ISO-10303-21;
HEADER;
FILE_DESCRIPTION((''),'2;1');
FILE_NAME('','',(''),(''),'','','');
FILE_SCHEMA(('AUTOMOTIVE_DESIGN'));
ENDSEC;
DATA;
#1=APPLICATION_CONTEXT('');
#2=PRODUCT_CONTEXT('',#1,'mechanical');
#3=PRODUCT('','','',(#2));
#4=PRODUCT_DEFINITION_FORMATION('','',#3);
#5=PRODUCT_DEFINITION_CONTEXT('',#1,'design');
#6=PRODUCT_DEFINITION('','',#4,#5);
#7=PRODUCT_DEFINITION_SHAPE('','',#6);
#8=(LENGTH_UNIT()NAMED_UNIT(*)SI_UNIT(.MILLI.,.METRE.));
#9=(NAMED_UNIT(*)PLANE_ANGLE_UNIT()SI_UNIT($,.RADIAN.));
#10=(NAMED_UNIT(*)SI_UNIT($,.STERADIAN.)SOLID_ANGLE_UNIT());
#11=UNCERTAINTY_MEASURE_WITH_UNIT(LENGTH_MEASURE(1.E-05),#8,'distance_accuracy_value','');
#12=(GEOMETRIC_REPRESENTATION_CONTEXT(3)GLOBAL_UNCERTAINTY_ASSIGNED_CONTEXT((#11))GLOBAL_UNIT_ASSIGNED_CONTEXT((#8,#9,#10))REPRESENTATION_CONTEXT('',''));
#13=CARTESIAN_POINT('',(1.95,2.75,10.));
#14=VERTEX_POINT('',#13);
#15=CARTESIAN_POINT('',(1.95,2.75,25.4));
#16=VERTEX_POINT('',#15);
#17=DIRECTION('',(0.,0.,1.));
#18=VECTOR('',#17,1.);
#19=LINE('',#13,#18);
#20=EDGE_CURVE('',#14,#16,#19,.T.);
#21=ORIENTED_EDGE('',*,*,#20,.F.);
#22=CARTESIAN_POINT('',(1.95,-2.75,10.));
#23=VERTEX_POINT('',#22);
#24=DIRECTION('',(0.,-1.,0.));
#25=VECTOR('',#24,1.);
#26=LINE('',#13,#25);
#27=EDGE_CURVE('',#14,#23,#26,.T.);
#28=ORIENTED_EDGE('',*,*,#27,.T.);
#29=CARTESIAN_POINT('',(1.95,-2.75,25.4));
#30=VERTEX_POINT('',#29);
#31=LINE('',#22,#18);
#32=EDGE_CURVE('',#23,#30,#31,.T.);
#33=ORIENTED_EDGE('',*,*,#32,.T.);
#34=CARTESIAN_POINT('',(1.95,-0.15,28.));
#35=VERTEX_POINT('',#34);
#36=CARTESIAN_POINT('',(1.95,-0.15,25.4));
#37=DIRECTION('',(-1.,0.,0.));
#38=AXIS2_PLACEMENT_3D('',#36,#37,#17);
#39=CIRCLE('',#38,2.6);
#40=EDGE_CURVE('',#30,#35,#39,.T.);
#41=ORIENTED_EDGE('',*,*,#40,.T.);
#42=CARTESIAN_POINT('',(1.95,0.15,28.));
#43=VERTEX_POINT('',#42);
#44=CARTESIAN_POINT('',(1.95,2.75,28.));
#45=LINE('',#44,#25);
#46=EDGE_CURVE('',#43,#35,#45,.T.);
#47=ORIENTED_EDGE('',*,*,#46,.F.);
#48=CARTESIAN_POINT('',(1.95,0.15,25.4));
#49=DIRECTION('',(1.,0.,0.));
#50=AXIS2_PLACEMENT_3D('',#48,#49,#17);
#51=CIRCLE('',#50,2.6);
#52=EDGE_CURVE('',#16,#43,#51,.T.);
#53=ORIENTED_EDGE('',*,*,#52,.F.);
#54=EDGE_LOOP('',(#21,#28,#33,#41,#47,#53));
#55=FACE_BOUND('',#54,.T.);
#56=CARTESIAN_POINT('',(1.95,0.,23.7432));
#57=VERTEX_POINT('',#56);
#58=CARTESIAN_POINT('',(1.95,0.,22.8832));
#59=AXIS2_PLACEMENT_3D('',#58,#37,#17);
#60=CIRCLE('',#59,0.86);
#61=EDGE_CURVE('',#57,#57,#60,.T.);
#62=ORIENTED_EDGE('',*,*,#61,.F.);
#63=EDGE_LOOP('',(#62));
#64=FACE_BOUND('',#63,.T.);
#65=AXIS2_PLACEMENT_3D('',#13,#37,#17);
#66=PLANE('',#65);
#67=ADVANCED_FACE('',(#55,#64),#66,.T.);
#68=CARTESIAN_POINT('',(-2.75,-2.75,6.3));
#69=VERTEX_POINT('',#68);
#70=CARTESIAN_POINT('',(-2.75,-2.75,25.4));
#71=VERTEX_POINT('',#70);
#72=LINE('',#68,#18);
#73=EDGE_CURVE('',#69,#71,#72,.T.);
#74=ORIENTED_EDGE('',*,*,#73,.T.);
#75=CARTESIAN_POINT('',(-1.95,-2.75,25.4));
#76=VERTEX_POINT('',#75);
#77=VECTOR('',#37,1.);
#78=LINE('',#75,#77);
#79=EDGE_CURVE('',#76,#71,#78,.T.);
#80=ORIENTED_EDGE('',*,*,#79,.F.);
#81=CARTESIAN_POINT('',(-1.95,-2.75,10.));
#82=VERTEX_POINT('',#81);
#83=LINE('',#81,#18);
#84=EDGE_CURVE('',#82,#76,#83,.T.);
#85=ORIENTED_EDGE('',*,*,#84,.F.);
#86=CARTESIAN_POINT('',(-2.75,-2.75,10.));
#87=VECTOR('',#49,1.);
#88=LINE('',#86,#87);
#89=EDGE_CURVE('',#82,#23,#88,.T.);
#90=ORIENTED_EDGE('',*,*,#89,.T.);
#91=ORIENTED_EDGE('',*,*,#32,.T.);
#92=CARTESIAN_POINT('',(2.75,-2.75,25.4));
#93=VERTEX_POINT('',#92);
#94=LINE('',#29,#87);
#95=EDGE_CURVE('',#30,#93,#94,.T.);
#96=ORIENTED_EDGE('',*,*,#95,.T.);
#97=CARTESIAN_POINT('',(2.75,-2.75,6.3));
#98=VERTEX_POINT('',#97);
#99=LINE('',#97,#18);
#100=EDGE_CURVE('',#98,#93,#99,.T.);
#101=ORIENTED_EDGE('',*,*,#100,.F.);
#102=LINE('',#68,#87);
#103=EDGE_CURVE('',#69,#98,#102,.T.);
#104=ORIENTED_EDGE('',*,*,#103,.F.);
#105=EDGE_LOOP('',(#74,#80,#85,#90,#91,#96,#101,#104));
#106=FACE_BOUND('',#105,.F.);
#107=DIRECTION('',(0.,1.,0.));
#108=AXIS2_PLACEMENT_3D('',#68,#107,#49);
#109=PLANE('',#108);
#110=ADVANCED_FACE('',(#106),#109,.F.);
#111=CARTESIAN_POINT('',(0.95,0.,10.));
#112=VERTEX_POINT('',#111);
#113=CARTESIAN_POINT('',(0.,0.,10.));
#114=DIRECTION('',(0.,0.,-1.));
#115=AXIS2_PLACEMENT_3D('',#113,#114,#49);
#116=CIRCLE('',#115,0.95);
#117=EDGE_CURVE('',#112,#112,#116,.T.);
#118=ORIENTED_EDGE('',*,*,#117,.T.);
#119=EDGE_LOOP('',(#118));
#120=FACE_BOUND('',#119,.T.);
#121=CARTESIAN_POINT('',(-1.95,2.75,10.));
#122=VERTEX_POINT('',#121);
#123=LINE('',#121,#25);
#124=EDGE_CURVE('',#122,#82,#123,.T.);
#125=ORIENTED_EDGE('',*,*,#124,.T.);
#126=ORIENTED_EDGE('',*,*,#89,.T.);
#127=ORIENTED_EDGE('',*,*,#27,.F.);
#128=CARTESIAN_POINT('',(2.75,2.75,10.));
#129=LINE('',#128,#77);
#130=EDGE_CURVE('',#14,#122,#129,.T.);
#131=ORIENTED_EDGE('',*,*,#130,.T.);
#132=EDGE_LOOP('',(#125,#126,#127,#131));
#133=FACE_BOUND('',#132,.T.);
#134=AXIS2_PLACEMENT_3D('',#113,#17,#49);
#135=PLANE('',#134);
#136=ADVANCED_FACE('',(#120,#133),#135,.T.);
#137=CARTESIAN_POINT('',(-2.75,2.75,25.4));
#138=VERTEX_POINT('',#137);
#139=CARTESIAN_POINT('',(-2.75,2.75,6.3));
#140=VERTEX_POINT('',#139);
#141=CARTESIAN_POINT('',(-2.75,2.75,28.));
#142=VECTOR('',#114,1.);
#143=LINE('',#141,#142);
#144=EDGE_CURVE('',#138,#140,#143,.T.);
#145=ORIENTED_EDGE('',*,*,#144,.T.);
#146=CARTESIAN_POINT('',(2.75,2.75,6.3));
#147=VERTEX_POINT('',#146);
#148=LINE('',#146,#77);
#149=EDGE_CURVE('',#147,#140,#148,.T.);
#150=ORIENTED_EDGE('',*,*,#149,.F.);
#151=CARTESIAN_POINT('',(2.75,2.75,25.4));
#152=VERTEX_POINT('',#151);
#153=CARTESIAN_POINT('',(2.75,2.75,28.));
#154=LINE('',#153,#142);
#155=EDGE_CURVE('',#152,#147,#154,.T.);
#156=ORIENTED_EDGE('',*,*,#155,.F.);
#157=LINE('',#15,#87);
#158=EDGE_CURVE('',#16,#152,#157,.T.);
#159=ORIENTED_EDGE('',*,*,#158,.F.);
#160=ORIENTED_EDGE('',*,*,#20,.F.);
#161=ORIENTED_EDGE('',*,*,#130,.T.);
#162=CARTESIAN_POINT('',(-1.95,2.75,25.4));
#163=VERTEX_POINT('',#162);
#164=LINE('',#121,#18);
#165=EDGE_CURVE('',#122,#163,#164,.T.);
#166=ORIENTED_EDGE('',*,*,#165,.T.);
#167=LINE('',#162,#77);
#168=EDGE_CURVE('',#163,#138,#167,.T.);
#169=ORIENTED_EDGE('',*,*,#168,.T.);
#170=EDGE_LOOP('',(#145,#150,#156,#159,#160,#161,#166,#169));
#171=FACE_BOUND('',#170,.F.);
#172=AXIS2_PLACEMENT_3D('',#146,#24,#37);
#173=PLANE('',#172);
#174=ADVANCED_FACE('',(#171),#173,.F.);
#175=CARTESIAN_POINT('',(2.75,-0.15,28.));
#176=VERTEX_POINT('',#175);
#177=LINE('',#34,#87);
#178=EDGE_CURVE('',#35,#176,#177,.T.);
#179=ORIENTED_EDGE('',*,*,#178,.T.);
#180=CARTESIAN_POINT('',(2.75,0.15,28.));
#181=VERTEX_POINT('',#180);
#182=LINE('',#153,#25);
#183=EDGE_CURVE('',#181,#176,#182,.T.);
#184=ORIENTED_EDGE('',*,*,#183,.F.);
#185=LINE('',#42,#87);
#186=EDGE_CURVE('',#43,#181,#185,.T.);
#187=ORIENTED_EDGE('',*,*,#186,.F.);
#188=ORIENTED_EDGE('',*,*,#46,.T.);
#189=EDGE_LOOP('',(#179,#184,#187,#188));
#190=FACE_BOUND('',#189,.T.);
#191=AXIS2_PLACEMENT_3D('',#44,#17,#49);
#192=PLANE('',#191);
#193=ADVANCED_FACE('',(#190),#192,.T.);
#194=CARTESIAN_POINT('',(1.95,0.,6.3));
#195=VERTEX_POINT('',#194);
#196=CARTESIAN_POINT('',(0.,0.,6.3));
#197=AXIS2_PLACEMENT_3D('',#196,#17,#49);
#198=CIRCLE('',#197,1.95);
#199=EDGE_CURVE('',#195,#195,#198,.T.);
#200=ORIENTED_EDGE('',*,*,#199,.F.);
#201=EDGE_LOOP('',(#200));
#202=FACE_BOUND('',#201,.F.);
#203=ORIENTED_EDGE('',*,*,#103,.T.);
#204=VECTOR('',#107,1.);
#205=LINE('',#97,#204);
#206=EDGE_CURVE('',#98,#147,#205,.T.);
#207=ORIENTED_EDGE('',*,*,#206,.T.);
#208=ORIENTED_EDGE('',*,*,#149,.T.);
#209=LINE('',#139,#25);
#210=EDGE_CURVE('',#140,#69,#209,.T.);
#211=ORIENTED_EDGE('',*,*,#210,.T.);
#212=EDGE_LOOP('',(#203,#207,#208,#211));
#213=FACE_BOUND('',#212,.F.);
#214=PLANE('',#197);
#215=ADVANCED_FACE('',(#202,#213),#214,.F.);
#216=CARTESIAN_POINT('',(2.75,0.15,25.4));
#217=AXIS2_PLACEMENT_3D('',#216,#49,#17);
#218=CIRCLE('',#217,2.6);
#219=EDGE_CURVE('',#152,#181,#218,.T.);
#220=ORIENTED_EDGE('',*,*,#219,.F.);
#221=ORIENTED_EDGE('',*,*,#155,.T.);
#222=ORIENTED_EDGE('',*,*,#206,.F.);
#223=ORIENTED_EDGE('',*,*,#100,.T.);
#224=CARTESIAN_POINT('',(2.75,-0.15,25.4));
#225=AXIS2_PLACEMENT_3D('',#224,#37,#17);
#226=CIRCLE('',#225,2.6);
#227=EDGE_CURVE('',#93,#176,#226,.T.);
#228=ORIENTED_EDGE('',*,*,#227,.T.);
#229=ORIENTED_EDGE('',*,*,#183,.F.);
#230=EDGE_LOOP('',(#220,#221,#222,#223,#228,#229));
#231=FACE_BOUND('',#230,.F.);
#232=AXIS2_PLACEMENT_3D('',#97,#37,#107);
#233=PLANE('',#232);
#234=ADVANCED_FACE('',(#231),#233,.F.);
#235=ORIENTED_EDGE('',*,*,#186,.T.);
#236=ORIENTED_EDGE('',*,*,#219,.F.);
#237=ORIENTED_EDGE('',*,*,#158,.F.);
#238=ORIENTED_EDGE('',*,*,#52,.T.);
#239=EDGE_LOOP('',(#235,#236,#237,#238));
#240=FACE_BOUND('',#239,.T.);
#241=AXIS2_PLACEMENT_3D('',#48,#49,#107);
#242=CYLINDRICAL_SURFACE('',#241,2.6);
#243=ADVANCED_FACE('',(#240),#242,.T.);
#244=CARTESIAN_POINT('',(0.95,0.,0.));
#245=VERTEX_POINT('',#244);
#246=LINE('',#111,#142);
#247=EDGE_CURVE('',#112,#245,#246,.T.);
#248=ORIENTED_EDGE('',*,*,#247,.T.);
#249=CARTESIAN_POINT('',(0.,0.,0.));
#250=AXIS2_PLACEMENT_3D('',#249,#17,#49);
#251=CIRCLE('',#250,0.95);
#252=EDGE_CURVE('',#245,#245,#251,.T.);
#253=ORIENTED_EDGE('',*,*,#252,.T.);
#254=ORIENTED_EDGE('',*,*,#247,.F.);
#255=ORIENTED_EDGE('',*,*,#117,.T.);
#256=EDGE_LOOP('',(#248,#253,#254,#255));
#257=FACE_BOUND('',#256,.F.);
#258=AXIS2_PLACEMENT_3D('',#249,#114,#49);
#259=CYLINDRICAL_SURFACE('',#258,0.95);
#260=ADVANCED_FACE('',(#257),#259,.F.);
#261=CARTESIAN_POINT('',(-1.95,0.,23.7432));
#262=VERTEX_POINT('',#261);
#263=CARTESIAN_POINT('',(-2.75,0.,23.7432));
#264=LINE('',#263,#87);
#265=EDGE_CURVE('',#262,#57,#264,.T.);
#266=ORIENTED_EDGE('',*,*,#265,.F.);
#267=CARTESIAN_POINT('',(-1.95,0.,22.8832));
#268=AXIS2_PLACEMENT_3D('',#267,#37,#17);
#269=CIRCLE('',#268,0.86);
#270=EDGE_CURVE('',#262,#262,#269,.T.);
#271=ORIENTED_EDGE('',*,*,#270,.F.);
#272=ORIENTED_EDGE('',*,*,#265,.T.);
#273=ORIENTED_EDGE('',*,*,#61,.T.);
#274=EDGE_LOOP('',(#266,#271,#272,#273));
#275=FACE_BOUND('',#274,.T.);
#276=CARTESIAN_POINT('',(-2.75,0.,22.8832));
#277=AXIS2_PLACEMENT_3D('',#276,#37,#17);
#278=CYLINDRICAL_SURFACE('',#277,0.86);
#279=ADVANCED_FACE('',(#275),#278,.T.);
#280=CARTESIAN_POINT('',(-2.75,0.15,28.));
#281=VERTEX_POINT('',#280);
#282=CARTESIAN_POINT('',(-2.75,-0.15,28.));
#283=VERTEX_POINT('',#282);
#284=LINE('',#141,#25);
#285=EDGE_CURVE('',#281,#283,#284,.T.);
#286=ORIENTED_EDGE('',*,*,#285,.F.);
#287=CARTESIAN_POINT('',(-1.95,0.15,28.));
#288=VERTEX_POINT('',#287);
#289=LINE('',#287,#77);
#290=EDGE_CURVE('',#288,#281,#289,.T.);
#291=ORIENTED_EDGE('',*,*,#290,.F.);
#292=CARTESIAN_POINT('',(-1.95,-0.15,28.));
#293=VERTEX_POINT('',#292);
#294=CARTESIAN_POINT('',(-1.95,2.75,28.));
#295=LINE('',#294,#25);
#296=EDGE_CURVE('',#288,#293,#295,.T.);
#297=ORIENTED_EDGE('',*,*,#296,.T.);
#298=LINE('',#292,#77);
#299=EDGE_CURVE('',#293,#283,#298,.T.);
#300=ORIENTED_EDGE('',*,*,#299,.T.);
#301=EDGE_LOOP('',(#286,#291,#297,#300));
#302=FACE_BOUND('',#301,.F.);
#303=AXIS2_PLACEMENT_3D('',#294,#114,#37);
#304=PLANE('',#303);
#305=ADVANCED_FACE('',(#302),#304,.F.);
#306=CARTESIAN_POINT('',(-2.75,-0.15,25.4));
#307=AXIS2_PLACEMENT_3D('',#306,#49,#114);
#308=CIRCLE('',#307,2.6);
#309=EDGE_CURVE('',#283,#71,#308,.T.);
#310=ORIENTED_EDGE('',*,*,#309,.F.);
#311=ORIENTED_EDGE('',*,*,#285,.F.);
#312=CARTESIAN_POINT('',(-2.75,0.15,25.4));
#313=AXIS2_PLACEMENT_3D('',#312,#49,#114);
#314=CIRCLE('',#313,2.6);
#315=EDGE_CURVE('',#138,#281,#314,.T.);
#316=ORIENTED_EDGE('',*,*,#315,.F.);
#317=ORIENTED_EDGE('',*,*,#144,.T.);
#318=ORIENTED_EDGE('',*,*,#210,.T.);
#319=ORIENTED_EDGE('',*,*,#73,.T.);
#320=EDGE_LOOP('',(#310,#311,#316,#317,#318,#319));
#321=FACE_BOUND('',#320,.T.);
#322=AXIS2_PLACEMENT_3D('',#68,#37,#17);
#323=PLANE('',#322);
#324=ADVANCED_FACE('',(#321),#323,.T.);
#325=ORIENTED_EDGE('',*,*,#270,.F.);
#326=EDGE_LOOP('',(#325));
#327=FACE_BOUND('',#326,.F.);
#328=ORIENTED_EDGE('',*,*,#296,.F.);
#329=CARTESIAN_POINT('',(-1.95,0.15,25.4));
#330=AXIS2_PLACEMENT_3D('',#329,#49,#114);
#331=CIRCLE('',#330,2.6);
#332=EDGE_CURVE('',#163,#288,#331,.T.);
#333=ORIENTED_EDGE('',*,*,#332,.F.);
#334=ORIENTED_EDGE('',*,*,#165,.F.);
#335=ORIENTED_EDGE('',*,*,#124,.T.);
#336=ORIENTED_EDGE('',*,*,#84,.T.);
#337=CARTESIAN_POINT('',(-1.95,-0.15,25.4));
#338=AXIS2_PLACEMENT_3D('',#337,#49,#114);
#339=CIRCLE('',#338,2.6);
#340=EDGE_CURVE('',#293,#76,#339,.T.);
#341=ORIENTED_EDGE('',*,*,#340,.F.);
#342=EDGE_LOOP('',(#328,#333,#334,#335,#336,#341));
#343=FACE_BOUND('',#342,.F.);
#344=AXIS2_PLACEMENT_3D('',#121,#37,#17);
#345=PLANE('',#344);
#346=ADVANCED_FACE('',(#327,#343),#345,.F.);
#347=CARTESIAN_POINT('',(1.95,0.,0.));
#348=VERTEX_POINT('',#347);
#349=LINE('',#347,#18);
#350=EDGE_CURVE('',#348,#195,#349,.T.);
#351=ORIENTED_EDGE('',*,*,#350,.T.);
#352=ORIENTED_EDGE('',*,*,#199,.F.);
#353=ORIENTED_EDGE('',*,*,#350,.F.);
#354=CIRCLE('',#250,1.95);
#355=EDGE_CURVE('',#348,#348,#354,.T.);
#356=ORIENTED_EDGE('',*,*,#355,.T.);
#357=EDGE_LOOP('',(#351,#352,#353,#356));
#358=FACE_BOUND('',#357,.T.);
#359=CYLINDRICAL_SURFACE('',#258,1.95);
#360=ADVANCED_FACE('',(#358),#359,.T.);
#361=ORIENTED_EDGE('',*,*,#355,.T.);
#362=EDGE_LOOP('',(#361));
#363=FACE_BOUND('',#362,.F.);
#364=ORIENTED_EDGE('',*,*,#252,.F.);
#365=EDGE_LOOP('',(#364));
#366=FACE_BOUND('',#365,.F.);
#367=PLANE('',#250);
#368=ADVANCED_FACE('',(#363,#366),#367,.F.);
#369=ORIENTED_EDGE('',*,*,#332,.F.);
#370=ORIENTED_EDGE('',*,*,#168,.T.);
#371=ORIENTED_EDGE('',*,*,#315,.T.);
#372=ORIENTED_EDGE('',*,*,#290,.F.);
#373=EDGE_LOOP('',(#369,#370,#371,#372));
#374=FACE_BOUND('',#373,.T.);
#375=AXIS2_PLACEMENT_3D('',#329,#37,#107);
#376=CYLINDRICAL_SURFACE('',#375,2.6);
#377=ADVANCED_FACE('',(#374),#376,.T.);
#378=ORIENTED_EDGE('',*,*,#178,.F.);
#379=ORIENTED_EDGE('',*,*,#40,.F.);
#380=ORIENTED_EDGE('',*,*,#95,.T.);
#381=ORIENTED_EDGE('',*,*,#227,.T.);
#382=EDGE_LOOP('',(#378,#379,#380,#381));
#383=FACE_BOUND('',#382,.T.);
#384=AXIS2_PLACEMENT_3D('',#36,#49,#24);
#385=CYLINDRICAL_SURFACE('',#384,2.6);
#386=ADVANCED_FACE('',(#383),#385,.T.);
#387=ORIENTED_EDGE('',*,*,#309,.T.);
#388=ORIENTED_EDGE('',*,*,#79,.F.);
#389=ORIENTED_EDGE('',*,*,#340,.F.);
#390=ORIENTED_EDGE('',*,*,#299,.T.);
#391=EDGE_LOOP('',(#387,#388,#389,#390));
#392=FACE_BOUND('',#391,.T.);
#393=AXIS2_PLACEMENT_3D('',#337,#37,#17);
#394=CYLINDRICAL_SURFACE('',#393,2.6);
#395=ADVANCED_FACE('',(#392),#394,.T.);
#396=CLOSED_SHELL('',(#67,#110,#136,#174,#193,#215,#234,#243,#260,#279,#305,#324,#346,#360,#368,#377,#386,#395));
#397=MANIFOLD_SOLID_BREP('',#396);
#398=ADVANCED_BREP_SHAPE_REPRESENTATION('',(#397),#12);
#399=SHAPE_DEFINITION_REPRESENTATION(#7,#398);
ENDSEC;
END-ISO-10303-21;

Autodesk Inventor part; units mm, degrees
ref_plane "YZ Plane" through (0, 0, 0) normal (1, 0, 0) x (0, 1, 0)
ref_plane "XZ Plane" through (0, 0, 0) normal (0, 1, 0) x (-1, 0, 0)
ref_plane "XY Plane" through (0, 0, 0) normal (0, 0, 1) x (1, 0, 0)
sketch "Sketch1" plane through (0, 0, 0) normal (0, 0, 1) x (1, 0, 0)
  circle A0 centre (0, 0) radius 0.95
  circle A1 centre (0, 0) radius 1.95
  dimension "d0" = 1.9
  dimension "d1" = 3.9
extrude "Extrusion1" add sketch "Sketch1" along normal blind 6.3
sketch "Sketch2" plane through (0, 0, 6.3) normal (0, 0, 1) x (1, 0, 0)
  line L0 (-2.75, -2.75) -> (2.75, -2.75)
  line L1 (2.75, -2.75) -> (2.75, 2.75)
  line L2 (2.75, 2.75) -> (-2.75, 2.75)
  line L3 (-2.75, 2.75) -> (-2.75, -2.75)
  line L4 (-2.75, -2.75) -> (2.75, 2.75) construction
  line L5 (2.75, -2.75) -> (-2.75, 2.75) construction
  point P0 (0, 0)
  dimension "d4" = 5.5
  dimension "d5" = 5.5
extrude "Extrusion2" add sketch "Sketch2" along normal blind 3.7
extrude "Extrusion3" cut sketch "Sketch1" along normal through all contours A0
sketch "Sketch3" plane through (-2.75, 2.75, 6.3) normal (0, 1, 0) x (1, 0, 0)
  line L0 (0.8, 6.3) -> (0.8, 0) projected
  line L1 (0, 0) -> (0, -3.7) projected
  line L2 (0, -3.7) -> (5.5, -3.7) projected
  line L3 (0, -3.7) -> (0.8, -3.7)
  line L4 (6.7827, -4.1433) -> (6.7693, -4.1433)
  line L5 (0.8, -3.7) -> (0.8, -21.7)
  line L6 (0.8, -21.7) -> (0, -21.7)
  line L7 (0, -21.7) -> (0, -3.7)
  line L8 (2.75, -3.7) -> (2.75, -2.5481)
  line L9 (4.7, -3.7) -> (4.7, -21.7)
  line L10 (4.7, -21.7) -> (5.5, -21.7)
  line L11 (5.5, -21.7) -> (5.5, -3.7)
  point P0 (2.75, 6.3)
  dimension "d10" = 18
extrude "Extrusion4" add sketch "Sketch3" against normal up to surface (5.5 mm away)
sketch "Sketch4" plane through (-2.75, -2.75, 6.3) normal (-1, 0, 0) x (0, 0, 1)
  line L0 (21.7, 5.5) -> (21.7, 0) projected
  line L1 (21.7, 2.75) -> (19.1, 2.75)
  circle A0 centre (16.5832, 2.75) radius 0.86
  point P0 (-6.3, 2.75)
  dimension "d13" = 2.6
  dimension "d14" = 1.72
extrude "Extrusion5" add sketch "Sketch4" against normal up to surface (5.5 mm away)
fillet "Fillet1" radius 2.6 2 edges at (-2.35, -2.75, 28) (-2.35, 2.75, 28)
fillet "Fillet2" radius 2.6 2 edges at (2.35, 2.75, 28) (2.35, -2.75, 28)
properties part number "G"
